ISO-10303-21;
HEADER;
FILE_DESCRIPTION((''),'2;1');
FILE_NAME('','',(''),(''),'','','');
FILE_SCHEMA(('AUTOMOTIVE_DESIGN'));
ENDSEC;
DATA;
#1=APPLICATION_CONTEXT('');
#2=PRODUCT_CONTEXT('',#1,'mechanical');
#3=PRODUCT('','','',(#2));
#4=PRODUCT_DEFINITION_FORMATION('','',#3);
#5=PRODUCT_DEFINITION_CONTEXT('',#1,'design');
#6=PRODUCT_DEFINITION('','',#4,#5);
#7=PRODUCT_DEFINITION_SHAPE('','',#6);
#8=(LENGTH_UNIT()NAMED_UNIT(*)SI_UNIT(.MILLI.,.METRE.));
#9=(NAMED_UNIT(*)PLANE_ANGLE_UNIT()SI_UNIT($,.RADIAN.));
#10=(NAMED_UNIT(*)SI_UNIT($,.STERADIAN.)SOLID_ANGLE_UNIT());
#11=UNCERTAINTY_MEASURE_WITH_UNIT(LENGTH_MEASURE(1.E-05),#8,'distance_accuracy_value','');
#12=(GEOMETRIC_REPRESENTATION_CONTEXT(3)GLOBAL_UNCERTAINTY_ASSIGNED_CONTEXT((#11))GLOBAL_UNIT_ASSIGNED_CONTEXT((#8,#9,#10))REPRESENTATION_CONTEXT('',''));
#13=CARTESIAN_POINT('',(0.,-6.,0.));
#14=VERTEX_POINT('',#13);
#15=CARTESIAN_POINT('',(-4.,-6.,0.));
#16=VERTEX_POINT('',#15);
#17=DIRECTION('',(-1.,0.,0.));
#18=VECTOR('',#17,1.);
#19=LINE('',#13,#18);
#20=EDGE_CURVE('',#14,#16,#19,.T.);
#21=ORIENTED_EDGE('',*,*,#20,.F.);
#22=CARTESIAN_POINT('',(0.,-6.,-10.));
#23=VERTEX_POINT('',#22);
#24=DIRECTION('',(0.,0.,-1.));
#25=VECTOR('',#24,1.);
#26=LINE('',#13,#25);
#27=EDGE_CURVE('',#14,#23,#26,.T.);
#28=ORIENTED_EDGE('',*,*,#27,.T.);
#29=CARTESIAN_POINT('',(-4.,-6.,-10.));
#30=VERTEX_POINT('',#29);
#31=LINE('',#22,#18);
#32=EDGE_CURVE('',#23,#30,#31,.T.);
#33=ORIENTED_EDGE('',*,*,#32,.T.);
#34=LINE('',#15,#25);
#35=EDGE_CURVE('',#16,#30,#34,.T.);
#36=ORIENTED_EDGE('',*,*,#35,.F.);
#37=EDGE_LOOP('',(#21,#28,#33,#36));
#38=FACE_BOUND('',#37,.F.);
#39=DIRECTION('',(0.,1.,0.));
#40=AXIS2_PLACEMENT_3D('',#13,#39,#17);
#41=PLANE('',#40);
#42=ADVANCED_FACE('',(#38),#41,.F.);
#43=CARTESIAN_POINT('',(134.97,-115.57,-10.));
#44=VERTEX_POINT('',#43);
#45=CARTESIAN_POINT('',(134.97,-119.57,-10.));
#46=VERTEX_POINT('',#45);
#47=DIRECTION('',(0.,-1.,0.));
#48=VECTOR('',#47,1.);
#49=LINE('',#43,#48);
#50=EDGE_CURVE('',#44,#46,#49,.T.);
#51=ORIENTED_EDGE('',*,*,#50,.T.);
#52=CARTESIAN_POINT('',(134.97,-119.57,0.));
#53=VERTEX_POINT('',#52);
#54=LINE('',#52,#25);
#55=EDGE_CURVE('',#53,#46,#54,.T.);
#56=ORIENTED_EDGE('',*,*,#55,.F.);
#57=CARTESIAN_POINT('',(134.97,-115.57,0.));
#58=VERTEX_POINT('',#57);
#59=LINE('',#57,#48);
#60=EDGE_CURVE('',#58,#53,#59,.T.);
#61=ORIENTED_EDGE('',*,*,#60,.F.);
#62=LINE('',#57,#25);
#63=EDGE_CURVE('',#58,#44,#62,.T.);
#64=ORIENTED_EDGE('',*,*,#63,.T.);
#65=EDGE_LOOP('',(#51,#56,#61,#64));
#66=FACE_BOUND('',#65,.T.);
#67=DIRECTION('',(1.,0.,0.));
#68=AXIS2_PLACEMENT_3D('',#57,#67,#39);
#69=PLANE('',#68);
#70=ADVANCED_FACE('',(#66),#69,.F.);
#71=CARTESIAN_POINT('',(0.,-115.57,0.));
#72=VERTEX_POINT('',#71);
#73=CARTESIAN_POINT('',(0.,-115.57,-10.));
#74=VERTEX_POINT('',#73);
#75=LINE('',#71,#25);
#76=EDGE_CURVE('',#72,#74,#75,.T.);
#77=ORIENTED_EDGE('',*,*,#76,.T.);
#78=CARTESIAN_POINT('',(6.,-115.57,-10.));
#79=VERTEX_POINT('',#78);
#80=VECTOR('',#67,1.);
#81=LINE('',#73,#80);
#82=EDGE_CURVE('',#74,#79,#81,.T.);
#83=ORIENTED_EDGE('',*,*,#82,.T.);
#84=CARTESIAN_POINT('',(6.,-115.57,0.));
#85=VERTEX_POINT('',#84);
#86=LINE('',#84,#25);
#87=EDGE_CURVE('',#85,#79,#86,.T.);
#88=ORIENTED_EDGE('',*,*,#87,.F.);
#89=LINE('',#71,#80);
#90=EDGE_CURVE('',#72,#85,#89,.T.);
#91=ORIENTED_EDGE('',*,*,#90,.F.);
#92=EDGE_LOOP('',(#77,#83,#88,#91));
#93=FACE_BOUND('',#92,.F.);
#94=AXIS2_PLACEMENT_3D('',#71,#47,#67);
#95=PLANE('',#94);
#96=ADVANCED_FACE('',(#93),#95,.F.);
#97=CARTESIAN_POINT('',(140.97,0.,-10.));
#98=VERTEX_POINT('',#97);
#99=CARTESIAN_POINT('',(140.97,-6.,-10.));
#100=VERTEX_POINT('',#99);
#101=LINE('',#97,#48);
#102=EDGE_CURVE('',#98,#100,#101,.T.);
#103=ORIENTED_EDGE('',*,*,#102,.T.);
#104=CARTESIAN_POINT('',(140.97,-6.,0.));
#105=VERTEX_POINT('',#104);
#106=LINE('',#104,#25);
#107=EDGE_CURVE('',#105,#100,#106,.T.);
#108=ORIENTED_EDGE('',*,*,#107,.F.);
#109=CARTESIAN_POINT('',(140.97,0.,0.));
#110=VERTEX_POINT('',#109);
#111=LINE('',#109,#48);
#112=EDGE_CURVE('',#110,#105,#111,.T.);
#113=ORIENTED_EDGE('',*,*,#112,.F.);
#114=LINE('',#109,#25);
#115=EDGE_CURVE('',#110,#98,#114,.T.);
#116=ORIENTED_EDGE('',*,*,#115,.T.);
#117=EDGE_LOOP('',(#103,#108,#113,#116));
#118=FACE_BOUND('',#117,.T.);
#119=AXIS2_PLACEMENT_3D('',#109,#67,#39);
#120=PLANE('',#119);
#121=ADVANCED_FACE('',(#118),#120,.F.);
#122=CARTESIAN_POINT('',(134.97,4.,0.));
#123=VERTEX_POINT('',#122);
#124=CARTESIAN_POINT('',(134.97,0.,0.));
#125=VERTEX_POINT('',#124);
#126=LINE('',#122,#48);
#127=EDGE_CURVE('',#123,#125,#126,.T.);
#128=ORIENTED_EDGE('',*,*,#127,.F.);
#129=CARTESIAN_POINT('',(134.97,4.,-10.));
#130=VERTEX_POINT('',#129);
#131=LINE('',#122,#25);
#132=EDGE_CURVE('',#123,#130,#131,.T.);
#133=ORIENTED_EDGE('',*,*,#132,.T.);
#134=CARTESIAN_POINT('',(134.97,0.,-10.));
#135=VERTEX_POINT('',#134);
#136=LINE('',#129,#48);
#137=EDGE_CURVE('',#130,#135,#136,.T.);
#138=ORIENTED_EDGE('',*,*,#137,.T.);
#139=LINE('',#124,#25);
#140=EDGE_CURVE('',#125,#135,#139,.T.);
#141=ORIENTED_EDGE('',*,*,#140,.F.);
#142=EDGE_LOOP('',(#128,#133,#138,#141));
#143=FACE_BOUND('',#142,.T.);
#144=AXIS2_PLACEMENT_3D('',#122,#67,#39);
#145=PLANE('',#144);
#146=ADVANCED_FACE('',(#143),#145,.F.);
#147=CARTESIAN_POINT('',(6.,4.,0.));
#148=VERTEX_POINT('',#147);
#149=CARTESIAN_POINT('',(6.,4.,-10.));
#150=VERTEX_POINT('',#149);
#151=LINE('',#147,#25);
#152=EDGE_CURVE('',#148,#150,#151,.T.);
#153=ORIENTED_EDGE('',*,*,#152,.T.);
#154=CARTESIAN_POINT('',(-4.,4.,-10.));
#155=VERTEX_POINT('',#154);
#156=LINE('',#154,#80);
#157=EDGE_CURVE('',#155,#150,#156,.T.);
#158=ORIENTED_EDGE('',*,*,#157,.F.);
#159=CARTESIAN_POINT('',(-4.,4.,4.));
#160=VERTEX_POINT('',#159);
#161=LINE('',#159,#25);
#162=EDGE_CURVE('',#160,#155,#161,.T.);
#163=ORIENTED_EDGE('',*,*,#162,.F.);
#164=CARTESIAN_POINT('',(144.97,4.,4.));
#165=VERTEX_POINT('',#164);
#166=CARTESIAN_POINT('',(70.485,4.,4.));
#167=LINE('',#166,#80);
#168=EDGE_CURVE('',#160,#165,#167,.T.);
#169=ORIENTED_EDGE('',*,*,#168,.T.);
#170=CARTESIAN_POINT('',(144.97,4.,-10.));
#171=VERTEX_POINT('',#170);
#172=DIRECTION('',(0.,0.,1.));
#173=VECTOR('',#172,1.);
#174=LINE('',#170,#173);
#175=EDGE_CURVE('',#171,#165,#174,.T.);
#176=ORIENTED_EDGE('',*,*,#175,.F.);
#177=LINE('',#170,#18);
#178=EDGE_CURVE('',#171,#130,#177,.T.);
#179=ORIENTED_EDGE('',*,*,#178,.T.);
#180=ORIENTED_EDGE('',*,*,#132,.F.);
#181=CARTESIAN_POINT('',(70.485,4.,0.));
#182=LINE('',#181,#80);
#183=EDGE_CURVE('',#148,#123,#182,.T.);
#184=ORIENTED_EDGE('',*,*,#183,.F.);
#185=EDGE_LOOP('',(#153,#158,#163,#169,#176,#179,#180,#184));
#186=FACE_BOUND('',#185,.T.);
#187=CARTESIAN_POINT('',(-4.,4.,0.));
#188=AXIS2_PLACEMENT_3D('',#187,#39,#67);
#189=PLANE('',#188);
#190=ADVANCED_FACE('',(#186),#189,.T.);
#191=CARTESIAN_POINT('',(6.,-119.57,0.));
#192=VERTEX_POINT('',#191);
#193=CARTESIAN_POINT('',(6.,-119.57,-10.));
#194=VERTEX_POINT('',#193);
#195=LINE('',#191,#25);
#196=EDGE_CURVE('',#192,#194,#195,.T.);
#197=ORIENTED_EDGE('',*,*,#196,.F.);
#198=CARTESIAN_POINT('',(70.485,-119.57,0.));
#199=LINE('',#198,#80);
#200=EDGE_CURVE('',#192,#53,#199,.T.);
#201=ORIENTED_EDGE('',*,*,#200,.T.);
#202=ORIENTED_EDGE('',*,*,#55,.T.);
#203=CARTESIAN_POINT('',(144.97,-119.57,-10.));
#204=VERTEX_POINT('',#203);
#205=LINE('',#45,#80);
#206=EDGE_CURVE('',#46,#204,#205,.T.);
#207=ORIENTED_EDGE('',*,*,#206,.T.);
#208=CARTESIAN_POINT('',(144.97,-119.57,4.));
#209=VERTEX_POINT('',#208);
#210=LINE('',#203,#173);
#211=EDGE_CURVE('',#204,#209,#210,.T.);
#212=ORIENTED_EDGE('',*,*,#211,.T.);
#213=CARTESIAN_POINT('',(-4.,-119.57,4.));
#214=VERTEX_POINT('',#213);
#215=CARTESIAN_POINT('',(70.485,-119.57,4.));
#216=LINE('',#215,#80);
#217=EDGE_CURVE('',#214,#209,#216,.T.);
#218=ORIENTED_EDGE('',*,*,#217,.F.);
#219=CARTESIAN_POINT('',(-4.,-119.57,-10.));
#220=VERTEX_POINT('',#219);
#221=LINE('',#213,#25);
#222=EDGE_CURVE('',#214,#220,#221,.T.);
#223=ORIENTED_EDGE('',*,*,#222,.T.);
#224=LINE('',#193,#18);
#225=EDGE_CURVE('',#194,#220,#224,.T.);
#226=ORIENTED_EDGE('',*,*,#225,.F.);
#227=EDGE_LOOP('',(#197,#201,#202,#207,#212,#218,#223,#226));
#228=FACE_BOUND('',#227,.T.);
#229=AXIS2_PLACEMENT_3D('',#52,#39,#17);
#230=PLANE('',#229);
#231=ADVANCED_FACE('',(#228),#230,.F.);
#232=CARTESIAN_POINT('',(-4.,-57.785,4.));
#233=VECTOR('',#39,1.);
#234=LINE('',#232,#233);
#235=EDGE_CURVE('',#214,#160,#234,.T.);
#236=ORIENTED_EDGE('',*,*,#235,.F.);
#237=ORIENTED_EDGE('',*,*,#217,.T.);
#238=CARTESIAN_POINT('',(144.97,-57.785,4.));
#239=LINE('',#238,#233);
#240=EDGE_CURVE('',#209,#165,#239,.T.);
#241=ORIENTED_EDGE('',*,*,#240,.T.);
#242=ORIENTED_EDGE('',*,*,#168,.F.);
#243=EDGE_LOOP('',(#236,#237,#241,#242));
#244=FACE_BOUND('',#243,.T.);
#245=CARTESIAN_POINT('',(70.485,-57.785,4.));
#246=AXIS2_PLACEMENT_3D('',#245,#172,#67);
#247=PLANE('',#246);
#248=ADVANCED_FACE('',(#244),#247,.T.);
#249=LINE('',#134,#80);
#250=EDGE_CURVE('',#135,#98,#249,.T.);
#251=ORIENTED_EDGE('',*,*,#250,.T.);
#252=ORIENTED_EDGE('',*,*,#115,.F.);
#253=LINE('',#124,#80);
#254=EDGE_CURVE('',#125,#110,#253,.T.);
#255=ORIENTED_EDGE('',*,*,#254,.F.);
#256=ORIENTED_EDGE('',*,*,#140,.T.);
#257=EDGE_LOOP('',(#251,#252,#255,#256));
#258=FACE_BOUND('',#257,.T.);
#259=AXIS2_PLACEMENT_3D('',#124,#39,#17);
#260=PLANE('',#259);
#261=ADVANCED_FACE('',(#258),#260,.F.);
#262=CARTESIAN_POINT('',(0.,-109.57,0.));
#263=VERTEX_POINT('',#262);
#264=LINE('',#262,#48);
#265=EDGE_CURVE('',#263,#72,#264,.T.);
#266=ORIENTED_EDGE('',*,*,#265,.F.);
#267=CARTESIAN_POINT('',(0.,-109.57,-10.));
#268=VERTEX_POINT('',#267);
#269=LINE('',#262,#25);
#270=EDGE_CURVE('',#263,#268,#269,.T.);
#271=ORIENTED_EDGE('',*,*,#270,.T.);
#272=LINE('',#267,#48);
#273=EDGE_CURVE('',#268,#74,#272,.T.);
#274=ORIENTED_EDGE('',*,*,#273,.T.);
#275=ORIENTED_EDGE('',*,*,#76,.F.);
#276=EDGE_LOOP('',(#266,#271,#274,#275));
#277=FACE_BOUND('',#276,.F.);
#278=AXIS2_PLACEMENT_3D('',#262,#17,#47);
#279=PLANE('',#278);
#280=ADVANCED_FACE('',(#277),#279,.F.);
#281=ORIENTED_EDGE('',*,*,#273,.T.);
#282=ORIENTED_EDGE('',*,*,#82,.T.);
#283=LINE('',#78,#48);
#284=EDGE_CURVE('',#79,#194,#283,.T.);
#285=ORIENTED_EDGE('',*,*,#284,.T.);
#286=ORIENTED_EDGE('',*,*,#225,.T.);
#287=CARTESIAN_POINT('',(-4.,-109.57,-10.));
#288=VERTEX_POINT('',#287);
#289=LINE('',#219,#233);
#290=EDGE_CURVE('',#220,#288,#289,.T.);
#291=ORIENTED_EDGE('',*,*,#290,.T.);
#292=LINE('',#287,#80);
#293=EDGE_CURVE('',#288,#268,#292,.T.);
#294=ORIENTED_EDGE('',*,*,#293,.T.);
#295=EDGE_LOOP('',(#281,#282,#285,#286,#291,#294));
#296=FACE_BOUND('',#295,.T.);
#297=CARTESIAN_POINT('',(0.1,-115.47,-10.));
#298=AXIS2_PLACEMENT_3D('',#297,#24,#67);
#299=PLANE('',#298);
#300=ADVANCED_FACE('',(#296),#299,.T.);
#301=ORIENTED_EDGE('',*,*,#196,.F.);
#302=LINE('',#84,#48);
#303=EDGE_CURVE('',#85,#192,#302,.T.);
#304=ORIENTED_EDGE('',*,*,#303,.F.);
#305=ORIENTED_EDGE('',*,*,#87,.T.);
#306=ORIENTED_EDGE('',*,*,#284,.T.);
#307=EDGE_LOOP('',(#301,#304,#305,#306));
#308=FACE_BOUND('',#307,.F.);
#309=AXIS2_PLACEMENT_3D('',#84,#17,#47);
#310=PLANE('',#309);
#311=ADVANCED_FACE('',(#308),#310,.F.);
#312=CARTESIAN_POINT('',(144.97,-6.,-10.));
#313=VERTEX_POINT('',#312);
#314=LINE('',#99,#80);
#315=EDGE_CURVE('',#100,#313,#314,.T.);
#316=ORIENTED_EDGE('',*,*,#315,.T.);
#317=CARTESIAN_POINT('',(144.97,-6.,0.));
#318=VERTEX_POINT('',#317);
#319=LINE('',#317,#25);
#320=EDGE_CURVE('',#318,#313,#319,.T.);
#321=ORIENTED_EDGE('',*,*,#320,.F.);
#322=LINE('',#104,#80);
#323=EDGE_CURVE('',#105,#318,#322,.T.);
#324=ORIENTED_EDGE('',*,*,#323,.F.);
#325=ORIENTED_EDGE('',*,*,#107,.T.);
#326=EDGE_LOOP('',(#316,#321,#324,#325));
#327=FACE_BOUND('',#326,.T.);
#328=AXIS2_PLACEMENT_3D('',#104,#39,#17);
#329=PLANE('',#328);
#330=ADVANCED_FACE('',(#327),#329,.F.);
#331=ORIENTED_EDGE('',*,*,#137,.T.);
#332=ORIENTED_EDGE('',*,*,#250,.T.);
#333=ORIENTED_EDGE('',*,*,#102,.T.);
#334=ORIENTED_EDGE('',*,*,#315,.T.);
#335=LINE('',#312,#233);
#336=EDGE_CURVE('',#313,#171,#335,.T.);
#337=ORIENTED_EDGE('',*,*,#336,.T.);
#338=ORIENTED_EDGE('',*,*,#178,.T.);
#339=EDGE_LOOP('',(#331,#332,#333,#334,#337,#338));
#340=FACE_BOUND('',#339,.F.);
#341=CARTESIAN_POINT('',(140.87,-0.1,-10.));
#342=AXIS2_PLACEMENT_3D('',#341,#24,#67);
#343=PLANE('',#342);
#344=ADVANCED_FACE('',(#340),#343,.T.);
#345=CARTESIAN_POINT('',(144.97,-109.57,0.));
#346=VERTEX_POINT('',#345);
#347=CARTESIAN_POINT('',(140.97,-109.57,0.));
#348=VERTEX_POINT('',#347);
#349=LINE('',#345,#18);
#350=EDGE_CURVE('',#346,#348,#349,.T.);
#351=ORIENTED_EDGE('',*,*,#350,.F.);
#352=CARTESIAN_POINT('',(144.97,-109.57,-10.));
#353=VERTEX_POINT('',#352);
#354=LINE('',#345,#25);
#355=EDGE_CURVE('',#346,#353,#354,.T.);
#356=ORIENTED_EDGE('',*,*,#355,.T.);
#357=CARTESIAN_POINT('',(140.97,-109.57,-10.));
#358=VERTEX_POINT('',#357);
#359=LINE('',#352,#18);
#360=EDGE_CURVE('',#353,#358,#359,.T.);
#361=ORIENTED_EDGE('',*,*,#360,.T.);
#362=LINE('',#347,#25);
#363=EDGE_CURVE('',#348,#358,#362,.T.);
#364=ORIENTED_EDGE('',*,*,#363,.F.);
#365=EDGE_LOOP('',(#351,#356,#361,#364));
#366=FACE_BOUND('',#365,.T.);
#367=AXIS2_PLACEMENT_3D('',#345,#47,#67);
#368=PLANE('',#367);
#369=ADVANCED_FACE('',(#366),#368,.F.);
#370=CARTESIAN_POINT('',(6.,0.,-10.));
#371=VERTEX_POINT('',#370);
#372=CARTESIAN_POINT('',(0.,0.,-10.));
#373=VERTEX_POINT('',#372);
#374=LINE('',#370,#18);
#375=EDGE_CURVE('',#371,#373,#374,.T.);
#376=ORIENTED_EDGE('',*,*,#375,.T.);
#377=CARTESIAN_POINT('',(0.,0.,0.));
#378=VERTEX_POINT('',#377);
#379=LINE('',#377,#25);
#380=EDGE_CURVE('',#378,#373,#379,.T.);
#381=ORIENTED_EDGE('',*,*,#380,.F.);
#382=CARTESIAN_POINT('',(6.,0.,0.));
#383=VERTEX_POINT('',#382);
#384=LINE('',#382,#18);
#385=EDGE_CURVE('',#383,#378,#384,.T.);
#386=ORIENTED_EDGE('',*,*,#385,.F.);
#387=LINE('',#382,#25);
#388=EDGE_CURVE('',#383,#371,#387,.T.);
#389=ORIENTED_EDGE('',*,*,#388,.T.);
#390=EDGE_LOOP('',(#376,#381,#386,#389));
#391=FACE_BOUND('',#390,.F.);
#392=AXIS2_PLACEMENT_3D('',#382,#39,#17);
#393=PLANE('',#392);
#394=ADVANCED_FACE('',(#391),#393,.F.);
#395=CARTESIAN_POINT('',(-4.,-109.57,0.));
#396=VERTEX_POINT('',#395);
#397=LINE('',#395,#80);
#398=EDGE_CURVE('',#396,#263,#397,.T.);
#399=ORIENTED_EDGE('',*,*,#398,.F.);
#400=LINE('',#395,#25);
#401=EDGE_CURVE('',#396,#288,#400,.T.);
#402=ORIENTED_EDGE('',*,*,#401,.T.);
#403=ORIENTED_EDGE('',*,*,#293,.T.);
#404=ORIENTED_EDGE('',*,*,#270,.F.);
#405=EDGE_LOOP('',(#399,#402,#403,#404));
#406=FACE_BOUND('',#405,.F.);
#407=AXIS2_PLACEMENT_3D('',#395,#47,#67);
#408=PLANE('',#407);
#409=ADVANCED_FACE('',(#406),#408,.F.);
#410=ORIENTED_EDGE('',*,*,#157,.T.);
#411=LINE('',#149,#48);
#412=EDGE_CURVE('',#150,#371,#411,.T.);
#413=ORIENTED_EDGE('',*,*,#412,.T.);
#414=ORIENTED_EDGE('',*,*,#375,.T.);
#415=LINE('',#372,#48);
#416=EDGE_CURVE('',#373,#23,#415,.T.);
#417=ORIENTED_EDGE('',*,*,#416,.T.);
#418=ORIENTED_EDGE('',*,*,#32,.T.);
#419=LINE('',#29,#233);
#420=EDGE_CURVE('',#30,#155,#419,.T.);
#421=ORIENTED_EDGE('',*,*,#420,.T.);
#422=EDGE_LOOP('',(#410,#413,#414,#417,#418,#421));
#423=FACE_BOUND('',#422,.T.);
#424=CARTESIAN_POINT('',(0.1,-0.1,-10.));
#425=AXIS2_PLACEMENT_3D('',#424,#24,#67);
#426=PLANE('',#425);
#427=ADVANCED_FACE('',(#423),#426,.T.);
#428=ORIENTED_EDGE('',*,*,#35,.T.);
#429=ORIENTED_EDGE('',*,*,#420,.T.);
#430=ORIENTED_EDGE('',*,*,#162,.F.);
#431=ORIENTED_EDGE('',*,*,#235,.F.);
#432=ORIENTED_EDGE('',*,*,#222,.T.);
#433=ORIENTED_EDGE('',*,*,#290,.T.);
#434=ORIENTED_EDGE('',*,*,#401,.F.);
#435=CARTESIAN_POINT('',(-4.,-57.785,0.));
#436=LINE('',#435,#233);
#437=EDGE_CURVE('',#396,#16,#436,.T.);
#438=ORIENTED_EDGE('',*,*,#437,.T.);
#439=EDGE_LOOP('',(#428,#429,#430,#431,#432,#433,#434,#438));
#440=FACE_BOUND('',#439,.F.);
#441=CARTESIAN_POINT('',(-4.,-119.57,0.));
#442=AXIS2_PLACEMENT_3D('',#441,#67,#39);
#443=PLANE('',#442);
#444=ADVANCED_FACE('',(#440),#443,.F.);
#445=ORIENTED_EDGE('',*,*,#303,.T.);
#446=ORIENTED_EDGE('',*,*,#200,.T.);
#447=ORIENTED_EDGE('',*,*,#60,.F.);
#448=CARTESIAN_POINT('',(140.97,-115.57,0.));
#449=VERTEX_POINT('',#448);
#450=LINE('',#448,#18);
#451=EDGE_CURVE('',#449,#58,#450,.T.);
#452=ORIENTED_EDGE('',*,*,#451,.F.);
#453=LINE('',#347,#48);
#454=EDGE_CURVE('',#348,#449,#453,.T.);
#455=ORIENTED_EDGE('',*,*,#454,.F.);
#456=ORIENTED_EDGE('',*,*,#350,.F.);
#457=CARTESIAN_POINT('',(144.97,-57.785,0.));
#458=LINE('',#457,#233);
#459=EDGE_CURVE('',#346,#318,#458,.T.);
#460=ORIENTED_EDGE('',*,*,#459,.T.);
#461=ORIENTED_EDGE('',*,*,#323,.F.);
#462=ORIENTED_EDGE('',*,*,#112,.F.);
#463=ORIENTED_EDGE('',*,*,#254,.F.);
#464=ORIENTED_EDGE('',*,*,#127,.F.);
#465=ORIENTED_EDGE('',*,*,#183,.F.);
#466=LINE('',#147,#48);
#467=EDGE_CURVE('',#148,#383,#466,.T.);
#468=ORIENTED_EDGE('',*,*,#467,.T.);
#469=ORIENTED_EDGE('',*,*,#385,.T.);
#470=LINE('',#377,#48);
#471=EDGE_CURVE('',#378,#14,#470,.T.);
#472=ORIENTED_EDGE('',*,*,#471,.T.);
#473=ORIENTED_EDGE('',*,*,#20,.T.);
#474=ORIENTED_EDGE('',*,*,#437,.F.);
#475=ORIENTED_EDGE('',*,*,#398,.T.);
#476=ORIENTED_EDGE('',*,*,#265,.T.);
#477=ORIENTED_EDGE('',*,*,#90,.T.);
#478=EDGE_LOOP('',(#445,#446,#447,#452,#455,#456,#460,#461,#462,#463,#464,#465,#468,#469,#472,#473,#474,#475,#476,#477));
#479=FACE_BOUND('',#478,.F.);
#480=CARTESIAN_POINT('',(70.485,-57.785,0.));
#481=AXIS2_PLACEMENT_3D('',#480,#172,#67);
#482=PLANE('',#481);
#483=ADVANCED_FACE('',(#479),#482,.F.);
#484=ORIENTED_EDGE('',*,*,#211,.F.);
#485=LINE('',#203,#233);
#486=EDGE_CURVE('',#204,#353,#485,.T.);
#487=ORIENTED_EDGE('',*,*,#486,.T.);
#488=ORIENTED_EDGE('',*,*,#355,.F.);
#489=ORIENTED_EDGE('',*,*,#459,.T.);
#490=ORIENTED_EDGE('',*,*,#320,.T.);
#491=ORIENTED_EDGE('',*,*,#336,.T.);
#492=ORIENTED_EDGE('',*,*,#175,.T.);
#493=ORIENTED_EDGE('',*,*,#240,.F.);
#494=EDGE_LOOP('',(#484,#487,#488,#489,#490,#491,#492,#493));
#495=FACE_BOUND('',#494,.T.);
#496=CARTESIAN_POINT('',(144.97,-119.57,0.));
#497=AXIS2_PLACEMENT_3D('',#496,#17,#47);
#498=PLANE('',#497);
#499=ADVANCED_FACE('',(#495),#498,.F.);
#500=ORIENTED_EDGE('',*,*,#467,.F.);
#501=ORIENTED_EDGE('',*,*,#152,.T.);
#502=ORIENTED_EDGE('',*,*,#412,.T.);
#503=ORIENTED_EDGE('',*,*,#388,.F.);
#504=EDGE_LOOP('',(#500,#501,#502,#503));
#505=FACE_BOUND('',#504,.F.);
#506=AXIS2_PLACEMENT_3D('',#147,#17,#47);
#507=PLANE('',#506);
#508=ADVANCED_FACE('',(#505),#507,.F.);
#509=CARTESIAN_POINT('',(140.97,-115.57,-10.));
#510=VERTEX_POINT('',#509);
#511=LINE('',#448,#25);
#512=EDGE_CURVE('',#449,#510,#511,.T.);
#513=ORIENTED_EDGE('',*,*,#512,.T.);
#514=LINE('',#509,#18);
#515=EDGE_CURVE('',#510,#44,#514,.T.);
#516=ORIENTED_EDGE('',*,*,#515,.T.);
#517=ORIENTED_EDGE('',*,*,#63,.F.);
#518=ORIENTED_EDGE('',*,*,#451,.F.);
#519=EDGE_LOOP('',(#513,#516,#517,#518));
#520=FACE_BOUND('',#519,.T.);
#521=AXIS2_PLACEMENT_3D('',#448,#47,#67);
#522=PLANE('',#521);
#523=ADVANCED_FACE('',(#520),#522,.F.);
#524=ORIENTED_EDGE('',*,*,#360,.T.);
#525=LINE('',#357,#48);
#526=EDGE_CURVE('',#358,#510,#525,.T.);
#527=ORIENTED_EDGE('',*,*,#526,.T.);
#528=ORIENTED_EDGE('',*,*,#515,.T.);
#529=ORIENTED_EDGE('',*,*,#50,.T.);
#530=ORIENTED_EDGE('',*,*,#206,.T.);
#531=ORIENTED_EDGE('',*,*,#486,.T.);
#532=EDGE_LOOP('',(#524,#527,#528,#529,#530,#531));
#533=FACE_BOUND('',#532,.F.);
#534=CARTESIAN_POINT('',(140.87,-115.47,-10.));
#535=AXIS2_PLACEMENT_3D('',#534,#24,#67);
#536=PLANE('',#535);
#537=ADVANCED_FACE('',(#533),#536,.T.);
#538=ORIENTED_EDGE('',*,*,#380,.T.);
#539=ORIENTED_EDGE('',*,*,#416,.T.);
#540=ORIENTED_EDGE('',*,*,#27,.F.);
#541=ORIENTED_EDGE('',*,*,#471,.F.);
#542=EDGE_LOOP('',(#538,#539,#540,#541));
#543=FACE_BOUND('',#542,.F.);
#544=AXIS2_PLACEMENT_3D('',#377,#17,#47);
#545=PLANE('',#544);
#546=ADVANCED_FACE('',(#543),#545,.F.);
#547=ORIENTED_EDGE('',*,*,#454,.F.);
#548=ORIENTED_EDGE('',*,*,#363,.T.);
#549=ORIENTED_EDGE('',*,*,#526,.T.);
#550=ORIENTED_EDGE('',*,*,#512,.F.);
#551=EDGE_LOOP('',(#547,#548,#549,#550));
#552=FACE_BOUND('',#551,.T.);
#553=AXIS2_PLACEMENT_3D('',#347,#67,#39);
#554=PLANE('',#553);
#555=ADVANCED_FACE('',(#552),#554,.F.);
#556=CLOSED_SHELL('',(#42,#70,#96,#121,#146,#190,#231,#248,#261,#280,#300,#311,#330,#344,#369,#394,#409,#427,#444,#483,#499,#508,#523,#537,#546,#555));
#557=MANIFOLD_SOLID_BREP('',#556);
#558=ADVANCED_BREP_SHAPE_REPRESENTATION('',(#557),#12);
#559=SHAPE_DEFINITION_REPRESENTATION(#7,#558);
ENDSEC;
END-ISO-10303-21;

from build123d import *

# Parameters (mm, degrees)
F0_W     = 148.97
F0_H     = 123.57
F0_W_2   = 132.97
F0_H_2   = 107.57
F1_DEPTH = 4
F4_DEPTH = 10
F6_W     = 132.97
F6_H     = 107.57
F7_DEPTH = 4


# Not quite as in the source:
# - a pattern or mirror of a feature is missing from the dataset's text; its kind, count and spacing are read off the source's solid


with BuildPart() as f1:
    # F0 (on Top) → F1 (new body)
    with BuildSketch(Plane.XY):
        with Locations((70.485, -57.785)):
            Rectangle(F0_W, F0_H)
        with Locations((70.485, -57.785)):
            Rectangle(F0_W_2, F0_H_2, mode=Mode.SUBTRACT)
    extrude(amount=F1_DEPTH)

    # F2 (on face) → F4 (join)
    with BuildSketch(Plane(origin=(0, 0, 0), x_dir=(1, 0, 0), z_dir=(0, 0, -1))):
        Polygon((6, 119.57), (-4, 119.57), (-4, 109.57), (0, 109.57), (0, 115.57), (6, 115.57), align=None)
        Polygon((6, 0), (0, 0), (0, 6), (-4, 6), (-4, -4), (6, -4), align=None)
    f4 = extrude(amount=F4_DEPTH)

    # F4_copies: F4 across plane
    add(f4.mirror(Plane(origin=(70.485, 0, 0), x_dir=(0, 0, 1), z_dir=(1, 0, 0))))

    # F6 (on face) → F7 (join, through all)
    with BuildSketch(Plane.XY.offset(4)):
        with Locations((70.485, -57.785)):
            Rectangle(F6_W, F6_H)
    extrude(amount=-F7_DEPTH)


solid = f1.part
